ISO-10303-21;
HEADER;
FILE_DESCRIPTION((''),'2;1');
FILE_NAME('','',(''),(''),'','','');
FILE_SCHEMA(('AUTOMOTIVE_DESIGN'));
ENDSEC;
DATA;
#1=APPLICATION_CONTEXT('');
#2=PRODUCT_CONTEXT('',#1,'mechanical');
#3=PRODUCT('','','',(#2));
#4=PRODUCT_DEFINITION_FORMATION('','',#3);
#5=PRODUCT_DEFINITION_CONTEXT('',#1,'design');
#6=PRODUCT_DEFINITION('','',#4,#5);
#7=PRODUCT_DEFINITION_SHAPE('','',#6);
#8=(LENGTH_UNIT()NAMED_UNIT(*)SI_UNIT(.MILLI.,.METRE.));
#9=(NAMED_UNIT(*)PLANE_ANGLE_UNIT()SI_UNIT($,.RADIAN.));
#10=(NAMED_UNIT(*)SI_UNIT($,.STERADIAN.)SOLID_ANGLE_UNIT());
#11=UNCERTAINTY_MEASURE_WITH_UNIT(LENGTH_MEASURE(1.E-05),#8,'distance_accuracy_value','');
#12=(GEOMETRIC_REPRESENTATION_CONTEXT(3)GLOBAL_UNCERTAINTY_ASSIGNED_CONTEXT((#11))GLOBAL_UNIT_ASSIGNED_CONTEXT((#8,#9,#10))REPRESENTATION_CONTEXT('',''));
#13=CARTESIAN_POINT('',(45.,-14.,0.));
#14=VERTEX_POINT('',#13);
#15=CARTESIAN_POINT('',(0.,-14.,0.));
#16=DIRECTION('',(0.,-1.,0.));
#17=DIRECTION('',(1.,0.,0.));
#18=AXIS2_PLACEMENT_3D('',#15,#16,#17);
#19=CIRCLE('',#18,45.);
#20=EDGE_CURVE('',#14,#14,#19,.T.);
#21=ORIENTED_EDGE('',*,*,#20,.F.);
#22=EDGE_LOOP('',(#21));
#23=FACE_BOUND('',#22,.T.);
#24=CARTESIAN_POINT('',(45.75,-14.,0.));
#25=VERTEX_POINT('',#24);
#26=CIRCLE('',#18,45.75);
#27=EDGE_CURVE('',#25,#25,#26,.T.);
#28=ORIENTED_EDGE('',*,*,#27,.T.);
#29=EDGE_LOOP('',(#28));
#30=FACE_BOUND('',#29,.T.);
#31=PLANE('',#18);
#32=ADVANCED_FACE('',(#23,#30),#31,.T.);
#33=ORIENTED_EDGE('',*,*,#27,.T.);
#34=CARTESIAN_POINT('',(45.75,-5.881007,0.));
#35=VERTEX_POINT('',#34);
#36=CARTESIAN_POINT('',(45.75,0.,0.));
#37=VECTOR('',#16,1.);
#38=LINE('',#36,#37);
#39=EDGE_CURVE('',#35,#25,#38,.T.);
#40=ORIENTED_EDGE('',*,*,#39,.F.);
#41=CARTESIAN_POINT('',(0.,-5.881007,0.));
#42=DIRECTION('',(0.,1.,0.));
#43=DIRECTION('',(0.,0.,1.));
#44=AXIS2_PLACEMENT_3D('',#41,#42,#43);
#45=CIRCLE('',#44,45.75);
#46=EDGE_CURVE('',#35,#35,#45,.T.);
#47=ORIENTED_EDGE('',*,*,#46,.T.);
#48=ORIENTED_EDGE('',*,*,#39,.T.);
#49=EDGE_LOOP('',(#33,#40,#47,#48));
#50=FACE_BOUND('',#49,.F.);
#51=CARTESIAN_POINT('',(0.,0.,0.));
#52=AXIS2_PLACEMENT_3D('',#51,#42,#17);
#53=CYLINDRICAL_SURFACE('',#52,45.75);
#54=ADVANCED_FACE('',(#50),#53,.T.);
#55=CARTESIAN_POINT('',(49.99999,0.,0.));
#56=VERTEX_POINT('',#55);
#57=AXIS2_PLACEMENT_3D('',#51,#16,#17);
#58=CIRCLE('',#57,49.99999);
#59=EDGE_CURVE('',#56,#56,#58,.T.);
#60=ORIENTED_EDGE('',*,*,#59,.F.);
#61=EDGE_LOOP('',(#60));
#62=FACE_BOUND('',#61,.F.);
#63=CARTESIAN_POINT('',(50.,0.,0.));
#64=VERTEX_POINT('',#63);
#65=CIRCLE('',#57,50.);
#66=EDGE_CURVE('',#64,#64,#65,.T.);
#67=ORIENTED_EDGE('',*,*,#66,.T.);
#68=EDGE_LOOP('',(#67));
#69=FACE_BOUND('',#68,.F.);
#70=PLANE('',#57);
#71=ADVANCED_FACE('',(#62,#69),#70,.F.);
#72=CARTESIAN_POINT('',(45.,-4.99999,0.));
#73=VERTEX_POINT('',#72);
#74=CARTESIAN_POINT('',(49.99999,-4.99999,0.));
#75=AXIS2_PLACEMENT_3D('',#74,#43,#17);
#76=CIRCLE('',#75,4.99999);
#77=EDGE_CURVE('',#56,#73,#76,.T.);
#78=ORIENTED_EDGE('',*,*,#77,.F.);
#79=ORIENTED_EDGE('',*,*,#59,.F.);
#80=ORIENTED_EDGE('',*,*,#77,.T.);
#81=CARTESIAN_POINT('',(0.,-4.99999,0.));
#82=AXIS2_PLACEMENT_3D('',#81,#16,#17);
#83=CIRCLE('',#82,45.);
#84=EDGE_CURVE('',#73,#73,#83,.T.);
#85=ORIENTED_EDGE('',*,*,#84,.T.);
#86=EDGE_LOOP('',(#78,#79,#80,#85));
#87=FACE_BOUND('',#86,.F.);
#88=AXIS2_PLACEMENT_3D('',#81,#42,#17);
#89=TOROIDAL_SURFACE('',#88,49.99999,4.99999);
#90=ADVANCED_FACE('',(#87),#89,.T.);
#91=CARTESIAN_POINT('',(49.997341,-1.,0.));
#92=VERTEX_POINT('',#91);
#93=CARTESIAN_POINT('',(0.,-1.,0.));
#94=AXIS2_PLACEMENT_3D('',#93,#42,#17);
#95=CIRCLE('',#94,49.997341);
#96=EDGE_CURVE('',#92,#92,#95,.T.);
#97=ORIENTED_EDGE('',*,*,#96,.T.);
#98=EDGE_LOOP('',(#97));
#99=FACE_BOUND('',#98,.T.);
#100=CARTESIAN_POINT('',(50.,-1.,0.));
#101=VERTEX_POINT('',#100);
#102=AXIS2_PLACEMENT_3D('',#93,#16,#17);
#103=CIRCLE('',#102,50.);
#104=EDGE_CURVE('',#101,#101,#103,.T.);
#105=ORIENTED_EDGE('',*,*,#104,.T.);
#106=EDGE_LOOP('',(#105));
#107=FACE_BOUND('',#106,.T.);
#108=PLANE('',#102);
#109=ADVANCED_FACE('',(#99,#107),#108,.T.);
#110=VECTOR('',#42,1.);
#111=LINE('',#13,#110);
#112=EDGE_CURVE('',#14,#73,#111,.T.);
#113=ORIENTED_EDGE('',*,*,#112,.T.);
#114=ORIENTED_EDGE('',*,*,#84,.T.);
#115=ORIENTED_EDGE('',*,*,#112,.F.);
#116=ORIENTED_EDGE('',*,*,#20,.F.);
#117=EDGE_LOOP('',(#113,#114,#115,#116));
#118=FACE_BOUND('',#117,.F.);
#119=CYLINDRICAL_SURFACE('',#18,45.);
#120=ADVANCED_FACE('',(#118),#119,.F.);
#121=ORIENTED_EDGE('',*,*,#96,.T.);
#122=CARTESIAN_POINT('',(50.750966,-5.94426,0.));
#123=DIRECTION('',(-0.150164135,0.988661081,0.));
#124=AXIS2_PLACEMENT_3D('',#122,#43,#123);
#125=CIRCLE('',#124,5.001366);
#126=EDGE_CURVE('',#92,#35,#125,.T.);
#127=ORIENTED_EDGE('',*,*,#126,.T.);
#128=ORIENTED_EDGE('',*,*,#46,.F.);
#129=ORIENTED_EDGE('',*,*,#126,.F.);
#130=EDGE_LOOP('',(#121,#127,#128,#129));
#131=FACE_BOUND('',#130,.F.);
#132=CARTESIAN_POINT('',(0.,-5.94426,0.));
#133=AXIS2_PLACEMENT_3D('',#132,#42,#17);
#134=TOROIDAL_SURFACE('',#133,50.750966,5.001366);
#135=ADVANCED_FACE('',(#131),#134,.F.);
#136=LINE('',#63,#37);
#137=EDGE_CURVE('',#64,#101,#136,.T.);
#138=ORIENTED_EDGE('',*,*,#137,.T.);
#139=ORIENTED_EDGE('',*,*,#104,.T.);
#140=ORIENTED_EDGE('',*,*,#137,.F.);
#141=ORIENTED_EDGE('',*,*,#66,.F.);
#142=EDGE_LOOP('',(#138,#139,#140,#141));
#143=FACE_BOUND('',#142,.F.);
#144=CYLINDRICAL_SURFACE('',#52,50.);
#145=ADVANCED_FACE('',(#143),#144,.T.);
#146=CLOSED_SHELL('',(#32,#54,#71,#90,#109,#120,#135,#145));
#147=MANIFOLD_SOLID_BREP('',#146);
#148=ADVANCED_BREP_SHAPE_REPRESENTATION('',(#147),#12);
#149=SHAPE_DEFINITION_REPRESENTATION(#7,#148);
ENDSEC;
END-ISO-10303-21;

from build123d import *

# Parameters (mm, degrees)
F0_R     = 50
F0_R_2   = 45
F1_DEPTH = 1
F2_R     = 45.75
F3_DEPTH = 14
F5_R     = 45
F6_DEPTH = 17
F7_R     = 4.99999


# Not quite as in the source:
# - a fillet or chamfer that OpenCascade refuses, or shapes differently, is made with other operations: its cross-section is extruded or revolved along the edge and cut away or added
# - a fillet or chamfer is up to 0.001 mm smaller than in the source, because OpenCascade refuses the exact size


with BuildPart() as f1:
    # F0 (on Front) → F1 (new body)
    with BuildSketch(Plane.XZ):
        Circle(F0_R)
        Circle(F0_R_2, mode=Mode.SUBTRACT)
    extrude(amount=F1_DEPTH)

    # F2 (on Front) → F3 (join)
    with BuildSketch(Plane.XZ):
        Circle(F2_R)
    extrude(amount=F3_DEPTH)

    # F4: fillet of radius 5 on 1 edges, made by hand

    # F4_s1 → F4_t2 (revolve)
    with BuildSketch(Plane.XY):
        with BuildLine():
            ThreePointArc((49.9999399343, -0.9996045356), (46.9582217487, -2.6840834341), (45.7496, -5.9442601394))
            Line((45.7496, -5.9442601394), (45.2494634315, -5.9442601394))
            ThreePointArc((45.2494634315, -5.9442601394), (45.2498634315, -3.4721300697), (45.2498634315, -1))
            Line((45.2498634315, -1), (45.75, -0.4998634315))
            ThreePointArc((45.75, -0.4998634315), (47.8749699672, -0.4998634315), (49.9248373592, -0.5051389752))
            Line((49.9248373592, -0.5051389752), (49.9999399343, -0.9996045356))
        make_face()
    revolve(axis=Axis((0, -1, 0), (0, 1, 0)))

    # F5 (on face) → F6 (cut)
    with BuildSketch(Plane.XZ.offset(14)):
        Circle(F5_R)
    extrude(amount=-F6_DEPTH, mode=Mode.SUBTRACT)

    # F7 (radius 5 in the source; OpenCascade refuses exactly that, so slightly less here)
    f7_edges = [f1.edges().sort_by_distance(p)[0] for p in [
        (-45, 0, 0),
    ]]
    fillet(f7_edges, radius=F7_R)


solid = f1.part
